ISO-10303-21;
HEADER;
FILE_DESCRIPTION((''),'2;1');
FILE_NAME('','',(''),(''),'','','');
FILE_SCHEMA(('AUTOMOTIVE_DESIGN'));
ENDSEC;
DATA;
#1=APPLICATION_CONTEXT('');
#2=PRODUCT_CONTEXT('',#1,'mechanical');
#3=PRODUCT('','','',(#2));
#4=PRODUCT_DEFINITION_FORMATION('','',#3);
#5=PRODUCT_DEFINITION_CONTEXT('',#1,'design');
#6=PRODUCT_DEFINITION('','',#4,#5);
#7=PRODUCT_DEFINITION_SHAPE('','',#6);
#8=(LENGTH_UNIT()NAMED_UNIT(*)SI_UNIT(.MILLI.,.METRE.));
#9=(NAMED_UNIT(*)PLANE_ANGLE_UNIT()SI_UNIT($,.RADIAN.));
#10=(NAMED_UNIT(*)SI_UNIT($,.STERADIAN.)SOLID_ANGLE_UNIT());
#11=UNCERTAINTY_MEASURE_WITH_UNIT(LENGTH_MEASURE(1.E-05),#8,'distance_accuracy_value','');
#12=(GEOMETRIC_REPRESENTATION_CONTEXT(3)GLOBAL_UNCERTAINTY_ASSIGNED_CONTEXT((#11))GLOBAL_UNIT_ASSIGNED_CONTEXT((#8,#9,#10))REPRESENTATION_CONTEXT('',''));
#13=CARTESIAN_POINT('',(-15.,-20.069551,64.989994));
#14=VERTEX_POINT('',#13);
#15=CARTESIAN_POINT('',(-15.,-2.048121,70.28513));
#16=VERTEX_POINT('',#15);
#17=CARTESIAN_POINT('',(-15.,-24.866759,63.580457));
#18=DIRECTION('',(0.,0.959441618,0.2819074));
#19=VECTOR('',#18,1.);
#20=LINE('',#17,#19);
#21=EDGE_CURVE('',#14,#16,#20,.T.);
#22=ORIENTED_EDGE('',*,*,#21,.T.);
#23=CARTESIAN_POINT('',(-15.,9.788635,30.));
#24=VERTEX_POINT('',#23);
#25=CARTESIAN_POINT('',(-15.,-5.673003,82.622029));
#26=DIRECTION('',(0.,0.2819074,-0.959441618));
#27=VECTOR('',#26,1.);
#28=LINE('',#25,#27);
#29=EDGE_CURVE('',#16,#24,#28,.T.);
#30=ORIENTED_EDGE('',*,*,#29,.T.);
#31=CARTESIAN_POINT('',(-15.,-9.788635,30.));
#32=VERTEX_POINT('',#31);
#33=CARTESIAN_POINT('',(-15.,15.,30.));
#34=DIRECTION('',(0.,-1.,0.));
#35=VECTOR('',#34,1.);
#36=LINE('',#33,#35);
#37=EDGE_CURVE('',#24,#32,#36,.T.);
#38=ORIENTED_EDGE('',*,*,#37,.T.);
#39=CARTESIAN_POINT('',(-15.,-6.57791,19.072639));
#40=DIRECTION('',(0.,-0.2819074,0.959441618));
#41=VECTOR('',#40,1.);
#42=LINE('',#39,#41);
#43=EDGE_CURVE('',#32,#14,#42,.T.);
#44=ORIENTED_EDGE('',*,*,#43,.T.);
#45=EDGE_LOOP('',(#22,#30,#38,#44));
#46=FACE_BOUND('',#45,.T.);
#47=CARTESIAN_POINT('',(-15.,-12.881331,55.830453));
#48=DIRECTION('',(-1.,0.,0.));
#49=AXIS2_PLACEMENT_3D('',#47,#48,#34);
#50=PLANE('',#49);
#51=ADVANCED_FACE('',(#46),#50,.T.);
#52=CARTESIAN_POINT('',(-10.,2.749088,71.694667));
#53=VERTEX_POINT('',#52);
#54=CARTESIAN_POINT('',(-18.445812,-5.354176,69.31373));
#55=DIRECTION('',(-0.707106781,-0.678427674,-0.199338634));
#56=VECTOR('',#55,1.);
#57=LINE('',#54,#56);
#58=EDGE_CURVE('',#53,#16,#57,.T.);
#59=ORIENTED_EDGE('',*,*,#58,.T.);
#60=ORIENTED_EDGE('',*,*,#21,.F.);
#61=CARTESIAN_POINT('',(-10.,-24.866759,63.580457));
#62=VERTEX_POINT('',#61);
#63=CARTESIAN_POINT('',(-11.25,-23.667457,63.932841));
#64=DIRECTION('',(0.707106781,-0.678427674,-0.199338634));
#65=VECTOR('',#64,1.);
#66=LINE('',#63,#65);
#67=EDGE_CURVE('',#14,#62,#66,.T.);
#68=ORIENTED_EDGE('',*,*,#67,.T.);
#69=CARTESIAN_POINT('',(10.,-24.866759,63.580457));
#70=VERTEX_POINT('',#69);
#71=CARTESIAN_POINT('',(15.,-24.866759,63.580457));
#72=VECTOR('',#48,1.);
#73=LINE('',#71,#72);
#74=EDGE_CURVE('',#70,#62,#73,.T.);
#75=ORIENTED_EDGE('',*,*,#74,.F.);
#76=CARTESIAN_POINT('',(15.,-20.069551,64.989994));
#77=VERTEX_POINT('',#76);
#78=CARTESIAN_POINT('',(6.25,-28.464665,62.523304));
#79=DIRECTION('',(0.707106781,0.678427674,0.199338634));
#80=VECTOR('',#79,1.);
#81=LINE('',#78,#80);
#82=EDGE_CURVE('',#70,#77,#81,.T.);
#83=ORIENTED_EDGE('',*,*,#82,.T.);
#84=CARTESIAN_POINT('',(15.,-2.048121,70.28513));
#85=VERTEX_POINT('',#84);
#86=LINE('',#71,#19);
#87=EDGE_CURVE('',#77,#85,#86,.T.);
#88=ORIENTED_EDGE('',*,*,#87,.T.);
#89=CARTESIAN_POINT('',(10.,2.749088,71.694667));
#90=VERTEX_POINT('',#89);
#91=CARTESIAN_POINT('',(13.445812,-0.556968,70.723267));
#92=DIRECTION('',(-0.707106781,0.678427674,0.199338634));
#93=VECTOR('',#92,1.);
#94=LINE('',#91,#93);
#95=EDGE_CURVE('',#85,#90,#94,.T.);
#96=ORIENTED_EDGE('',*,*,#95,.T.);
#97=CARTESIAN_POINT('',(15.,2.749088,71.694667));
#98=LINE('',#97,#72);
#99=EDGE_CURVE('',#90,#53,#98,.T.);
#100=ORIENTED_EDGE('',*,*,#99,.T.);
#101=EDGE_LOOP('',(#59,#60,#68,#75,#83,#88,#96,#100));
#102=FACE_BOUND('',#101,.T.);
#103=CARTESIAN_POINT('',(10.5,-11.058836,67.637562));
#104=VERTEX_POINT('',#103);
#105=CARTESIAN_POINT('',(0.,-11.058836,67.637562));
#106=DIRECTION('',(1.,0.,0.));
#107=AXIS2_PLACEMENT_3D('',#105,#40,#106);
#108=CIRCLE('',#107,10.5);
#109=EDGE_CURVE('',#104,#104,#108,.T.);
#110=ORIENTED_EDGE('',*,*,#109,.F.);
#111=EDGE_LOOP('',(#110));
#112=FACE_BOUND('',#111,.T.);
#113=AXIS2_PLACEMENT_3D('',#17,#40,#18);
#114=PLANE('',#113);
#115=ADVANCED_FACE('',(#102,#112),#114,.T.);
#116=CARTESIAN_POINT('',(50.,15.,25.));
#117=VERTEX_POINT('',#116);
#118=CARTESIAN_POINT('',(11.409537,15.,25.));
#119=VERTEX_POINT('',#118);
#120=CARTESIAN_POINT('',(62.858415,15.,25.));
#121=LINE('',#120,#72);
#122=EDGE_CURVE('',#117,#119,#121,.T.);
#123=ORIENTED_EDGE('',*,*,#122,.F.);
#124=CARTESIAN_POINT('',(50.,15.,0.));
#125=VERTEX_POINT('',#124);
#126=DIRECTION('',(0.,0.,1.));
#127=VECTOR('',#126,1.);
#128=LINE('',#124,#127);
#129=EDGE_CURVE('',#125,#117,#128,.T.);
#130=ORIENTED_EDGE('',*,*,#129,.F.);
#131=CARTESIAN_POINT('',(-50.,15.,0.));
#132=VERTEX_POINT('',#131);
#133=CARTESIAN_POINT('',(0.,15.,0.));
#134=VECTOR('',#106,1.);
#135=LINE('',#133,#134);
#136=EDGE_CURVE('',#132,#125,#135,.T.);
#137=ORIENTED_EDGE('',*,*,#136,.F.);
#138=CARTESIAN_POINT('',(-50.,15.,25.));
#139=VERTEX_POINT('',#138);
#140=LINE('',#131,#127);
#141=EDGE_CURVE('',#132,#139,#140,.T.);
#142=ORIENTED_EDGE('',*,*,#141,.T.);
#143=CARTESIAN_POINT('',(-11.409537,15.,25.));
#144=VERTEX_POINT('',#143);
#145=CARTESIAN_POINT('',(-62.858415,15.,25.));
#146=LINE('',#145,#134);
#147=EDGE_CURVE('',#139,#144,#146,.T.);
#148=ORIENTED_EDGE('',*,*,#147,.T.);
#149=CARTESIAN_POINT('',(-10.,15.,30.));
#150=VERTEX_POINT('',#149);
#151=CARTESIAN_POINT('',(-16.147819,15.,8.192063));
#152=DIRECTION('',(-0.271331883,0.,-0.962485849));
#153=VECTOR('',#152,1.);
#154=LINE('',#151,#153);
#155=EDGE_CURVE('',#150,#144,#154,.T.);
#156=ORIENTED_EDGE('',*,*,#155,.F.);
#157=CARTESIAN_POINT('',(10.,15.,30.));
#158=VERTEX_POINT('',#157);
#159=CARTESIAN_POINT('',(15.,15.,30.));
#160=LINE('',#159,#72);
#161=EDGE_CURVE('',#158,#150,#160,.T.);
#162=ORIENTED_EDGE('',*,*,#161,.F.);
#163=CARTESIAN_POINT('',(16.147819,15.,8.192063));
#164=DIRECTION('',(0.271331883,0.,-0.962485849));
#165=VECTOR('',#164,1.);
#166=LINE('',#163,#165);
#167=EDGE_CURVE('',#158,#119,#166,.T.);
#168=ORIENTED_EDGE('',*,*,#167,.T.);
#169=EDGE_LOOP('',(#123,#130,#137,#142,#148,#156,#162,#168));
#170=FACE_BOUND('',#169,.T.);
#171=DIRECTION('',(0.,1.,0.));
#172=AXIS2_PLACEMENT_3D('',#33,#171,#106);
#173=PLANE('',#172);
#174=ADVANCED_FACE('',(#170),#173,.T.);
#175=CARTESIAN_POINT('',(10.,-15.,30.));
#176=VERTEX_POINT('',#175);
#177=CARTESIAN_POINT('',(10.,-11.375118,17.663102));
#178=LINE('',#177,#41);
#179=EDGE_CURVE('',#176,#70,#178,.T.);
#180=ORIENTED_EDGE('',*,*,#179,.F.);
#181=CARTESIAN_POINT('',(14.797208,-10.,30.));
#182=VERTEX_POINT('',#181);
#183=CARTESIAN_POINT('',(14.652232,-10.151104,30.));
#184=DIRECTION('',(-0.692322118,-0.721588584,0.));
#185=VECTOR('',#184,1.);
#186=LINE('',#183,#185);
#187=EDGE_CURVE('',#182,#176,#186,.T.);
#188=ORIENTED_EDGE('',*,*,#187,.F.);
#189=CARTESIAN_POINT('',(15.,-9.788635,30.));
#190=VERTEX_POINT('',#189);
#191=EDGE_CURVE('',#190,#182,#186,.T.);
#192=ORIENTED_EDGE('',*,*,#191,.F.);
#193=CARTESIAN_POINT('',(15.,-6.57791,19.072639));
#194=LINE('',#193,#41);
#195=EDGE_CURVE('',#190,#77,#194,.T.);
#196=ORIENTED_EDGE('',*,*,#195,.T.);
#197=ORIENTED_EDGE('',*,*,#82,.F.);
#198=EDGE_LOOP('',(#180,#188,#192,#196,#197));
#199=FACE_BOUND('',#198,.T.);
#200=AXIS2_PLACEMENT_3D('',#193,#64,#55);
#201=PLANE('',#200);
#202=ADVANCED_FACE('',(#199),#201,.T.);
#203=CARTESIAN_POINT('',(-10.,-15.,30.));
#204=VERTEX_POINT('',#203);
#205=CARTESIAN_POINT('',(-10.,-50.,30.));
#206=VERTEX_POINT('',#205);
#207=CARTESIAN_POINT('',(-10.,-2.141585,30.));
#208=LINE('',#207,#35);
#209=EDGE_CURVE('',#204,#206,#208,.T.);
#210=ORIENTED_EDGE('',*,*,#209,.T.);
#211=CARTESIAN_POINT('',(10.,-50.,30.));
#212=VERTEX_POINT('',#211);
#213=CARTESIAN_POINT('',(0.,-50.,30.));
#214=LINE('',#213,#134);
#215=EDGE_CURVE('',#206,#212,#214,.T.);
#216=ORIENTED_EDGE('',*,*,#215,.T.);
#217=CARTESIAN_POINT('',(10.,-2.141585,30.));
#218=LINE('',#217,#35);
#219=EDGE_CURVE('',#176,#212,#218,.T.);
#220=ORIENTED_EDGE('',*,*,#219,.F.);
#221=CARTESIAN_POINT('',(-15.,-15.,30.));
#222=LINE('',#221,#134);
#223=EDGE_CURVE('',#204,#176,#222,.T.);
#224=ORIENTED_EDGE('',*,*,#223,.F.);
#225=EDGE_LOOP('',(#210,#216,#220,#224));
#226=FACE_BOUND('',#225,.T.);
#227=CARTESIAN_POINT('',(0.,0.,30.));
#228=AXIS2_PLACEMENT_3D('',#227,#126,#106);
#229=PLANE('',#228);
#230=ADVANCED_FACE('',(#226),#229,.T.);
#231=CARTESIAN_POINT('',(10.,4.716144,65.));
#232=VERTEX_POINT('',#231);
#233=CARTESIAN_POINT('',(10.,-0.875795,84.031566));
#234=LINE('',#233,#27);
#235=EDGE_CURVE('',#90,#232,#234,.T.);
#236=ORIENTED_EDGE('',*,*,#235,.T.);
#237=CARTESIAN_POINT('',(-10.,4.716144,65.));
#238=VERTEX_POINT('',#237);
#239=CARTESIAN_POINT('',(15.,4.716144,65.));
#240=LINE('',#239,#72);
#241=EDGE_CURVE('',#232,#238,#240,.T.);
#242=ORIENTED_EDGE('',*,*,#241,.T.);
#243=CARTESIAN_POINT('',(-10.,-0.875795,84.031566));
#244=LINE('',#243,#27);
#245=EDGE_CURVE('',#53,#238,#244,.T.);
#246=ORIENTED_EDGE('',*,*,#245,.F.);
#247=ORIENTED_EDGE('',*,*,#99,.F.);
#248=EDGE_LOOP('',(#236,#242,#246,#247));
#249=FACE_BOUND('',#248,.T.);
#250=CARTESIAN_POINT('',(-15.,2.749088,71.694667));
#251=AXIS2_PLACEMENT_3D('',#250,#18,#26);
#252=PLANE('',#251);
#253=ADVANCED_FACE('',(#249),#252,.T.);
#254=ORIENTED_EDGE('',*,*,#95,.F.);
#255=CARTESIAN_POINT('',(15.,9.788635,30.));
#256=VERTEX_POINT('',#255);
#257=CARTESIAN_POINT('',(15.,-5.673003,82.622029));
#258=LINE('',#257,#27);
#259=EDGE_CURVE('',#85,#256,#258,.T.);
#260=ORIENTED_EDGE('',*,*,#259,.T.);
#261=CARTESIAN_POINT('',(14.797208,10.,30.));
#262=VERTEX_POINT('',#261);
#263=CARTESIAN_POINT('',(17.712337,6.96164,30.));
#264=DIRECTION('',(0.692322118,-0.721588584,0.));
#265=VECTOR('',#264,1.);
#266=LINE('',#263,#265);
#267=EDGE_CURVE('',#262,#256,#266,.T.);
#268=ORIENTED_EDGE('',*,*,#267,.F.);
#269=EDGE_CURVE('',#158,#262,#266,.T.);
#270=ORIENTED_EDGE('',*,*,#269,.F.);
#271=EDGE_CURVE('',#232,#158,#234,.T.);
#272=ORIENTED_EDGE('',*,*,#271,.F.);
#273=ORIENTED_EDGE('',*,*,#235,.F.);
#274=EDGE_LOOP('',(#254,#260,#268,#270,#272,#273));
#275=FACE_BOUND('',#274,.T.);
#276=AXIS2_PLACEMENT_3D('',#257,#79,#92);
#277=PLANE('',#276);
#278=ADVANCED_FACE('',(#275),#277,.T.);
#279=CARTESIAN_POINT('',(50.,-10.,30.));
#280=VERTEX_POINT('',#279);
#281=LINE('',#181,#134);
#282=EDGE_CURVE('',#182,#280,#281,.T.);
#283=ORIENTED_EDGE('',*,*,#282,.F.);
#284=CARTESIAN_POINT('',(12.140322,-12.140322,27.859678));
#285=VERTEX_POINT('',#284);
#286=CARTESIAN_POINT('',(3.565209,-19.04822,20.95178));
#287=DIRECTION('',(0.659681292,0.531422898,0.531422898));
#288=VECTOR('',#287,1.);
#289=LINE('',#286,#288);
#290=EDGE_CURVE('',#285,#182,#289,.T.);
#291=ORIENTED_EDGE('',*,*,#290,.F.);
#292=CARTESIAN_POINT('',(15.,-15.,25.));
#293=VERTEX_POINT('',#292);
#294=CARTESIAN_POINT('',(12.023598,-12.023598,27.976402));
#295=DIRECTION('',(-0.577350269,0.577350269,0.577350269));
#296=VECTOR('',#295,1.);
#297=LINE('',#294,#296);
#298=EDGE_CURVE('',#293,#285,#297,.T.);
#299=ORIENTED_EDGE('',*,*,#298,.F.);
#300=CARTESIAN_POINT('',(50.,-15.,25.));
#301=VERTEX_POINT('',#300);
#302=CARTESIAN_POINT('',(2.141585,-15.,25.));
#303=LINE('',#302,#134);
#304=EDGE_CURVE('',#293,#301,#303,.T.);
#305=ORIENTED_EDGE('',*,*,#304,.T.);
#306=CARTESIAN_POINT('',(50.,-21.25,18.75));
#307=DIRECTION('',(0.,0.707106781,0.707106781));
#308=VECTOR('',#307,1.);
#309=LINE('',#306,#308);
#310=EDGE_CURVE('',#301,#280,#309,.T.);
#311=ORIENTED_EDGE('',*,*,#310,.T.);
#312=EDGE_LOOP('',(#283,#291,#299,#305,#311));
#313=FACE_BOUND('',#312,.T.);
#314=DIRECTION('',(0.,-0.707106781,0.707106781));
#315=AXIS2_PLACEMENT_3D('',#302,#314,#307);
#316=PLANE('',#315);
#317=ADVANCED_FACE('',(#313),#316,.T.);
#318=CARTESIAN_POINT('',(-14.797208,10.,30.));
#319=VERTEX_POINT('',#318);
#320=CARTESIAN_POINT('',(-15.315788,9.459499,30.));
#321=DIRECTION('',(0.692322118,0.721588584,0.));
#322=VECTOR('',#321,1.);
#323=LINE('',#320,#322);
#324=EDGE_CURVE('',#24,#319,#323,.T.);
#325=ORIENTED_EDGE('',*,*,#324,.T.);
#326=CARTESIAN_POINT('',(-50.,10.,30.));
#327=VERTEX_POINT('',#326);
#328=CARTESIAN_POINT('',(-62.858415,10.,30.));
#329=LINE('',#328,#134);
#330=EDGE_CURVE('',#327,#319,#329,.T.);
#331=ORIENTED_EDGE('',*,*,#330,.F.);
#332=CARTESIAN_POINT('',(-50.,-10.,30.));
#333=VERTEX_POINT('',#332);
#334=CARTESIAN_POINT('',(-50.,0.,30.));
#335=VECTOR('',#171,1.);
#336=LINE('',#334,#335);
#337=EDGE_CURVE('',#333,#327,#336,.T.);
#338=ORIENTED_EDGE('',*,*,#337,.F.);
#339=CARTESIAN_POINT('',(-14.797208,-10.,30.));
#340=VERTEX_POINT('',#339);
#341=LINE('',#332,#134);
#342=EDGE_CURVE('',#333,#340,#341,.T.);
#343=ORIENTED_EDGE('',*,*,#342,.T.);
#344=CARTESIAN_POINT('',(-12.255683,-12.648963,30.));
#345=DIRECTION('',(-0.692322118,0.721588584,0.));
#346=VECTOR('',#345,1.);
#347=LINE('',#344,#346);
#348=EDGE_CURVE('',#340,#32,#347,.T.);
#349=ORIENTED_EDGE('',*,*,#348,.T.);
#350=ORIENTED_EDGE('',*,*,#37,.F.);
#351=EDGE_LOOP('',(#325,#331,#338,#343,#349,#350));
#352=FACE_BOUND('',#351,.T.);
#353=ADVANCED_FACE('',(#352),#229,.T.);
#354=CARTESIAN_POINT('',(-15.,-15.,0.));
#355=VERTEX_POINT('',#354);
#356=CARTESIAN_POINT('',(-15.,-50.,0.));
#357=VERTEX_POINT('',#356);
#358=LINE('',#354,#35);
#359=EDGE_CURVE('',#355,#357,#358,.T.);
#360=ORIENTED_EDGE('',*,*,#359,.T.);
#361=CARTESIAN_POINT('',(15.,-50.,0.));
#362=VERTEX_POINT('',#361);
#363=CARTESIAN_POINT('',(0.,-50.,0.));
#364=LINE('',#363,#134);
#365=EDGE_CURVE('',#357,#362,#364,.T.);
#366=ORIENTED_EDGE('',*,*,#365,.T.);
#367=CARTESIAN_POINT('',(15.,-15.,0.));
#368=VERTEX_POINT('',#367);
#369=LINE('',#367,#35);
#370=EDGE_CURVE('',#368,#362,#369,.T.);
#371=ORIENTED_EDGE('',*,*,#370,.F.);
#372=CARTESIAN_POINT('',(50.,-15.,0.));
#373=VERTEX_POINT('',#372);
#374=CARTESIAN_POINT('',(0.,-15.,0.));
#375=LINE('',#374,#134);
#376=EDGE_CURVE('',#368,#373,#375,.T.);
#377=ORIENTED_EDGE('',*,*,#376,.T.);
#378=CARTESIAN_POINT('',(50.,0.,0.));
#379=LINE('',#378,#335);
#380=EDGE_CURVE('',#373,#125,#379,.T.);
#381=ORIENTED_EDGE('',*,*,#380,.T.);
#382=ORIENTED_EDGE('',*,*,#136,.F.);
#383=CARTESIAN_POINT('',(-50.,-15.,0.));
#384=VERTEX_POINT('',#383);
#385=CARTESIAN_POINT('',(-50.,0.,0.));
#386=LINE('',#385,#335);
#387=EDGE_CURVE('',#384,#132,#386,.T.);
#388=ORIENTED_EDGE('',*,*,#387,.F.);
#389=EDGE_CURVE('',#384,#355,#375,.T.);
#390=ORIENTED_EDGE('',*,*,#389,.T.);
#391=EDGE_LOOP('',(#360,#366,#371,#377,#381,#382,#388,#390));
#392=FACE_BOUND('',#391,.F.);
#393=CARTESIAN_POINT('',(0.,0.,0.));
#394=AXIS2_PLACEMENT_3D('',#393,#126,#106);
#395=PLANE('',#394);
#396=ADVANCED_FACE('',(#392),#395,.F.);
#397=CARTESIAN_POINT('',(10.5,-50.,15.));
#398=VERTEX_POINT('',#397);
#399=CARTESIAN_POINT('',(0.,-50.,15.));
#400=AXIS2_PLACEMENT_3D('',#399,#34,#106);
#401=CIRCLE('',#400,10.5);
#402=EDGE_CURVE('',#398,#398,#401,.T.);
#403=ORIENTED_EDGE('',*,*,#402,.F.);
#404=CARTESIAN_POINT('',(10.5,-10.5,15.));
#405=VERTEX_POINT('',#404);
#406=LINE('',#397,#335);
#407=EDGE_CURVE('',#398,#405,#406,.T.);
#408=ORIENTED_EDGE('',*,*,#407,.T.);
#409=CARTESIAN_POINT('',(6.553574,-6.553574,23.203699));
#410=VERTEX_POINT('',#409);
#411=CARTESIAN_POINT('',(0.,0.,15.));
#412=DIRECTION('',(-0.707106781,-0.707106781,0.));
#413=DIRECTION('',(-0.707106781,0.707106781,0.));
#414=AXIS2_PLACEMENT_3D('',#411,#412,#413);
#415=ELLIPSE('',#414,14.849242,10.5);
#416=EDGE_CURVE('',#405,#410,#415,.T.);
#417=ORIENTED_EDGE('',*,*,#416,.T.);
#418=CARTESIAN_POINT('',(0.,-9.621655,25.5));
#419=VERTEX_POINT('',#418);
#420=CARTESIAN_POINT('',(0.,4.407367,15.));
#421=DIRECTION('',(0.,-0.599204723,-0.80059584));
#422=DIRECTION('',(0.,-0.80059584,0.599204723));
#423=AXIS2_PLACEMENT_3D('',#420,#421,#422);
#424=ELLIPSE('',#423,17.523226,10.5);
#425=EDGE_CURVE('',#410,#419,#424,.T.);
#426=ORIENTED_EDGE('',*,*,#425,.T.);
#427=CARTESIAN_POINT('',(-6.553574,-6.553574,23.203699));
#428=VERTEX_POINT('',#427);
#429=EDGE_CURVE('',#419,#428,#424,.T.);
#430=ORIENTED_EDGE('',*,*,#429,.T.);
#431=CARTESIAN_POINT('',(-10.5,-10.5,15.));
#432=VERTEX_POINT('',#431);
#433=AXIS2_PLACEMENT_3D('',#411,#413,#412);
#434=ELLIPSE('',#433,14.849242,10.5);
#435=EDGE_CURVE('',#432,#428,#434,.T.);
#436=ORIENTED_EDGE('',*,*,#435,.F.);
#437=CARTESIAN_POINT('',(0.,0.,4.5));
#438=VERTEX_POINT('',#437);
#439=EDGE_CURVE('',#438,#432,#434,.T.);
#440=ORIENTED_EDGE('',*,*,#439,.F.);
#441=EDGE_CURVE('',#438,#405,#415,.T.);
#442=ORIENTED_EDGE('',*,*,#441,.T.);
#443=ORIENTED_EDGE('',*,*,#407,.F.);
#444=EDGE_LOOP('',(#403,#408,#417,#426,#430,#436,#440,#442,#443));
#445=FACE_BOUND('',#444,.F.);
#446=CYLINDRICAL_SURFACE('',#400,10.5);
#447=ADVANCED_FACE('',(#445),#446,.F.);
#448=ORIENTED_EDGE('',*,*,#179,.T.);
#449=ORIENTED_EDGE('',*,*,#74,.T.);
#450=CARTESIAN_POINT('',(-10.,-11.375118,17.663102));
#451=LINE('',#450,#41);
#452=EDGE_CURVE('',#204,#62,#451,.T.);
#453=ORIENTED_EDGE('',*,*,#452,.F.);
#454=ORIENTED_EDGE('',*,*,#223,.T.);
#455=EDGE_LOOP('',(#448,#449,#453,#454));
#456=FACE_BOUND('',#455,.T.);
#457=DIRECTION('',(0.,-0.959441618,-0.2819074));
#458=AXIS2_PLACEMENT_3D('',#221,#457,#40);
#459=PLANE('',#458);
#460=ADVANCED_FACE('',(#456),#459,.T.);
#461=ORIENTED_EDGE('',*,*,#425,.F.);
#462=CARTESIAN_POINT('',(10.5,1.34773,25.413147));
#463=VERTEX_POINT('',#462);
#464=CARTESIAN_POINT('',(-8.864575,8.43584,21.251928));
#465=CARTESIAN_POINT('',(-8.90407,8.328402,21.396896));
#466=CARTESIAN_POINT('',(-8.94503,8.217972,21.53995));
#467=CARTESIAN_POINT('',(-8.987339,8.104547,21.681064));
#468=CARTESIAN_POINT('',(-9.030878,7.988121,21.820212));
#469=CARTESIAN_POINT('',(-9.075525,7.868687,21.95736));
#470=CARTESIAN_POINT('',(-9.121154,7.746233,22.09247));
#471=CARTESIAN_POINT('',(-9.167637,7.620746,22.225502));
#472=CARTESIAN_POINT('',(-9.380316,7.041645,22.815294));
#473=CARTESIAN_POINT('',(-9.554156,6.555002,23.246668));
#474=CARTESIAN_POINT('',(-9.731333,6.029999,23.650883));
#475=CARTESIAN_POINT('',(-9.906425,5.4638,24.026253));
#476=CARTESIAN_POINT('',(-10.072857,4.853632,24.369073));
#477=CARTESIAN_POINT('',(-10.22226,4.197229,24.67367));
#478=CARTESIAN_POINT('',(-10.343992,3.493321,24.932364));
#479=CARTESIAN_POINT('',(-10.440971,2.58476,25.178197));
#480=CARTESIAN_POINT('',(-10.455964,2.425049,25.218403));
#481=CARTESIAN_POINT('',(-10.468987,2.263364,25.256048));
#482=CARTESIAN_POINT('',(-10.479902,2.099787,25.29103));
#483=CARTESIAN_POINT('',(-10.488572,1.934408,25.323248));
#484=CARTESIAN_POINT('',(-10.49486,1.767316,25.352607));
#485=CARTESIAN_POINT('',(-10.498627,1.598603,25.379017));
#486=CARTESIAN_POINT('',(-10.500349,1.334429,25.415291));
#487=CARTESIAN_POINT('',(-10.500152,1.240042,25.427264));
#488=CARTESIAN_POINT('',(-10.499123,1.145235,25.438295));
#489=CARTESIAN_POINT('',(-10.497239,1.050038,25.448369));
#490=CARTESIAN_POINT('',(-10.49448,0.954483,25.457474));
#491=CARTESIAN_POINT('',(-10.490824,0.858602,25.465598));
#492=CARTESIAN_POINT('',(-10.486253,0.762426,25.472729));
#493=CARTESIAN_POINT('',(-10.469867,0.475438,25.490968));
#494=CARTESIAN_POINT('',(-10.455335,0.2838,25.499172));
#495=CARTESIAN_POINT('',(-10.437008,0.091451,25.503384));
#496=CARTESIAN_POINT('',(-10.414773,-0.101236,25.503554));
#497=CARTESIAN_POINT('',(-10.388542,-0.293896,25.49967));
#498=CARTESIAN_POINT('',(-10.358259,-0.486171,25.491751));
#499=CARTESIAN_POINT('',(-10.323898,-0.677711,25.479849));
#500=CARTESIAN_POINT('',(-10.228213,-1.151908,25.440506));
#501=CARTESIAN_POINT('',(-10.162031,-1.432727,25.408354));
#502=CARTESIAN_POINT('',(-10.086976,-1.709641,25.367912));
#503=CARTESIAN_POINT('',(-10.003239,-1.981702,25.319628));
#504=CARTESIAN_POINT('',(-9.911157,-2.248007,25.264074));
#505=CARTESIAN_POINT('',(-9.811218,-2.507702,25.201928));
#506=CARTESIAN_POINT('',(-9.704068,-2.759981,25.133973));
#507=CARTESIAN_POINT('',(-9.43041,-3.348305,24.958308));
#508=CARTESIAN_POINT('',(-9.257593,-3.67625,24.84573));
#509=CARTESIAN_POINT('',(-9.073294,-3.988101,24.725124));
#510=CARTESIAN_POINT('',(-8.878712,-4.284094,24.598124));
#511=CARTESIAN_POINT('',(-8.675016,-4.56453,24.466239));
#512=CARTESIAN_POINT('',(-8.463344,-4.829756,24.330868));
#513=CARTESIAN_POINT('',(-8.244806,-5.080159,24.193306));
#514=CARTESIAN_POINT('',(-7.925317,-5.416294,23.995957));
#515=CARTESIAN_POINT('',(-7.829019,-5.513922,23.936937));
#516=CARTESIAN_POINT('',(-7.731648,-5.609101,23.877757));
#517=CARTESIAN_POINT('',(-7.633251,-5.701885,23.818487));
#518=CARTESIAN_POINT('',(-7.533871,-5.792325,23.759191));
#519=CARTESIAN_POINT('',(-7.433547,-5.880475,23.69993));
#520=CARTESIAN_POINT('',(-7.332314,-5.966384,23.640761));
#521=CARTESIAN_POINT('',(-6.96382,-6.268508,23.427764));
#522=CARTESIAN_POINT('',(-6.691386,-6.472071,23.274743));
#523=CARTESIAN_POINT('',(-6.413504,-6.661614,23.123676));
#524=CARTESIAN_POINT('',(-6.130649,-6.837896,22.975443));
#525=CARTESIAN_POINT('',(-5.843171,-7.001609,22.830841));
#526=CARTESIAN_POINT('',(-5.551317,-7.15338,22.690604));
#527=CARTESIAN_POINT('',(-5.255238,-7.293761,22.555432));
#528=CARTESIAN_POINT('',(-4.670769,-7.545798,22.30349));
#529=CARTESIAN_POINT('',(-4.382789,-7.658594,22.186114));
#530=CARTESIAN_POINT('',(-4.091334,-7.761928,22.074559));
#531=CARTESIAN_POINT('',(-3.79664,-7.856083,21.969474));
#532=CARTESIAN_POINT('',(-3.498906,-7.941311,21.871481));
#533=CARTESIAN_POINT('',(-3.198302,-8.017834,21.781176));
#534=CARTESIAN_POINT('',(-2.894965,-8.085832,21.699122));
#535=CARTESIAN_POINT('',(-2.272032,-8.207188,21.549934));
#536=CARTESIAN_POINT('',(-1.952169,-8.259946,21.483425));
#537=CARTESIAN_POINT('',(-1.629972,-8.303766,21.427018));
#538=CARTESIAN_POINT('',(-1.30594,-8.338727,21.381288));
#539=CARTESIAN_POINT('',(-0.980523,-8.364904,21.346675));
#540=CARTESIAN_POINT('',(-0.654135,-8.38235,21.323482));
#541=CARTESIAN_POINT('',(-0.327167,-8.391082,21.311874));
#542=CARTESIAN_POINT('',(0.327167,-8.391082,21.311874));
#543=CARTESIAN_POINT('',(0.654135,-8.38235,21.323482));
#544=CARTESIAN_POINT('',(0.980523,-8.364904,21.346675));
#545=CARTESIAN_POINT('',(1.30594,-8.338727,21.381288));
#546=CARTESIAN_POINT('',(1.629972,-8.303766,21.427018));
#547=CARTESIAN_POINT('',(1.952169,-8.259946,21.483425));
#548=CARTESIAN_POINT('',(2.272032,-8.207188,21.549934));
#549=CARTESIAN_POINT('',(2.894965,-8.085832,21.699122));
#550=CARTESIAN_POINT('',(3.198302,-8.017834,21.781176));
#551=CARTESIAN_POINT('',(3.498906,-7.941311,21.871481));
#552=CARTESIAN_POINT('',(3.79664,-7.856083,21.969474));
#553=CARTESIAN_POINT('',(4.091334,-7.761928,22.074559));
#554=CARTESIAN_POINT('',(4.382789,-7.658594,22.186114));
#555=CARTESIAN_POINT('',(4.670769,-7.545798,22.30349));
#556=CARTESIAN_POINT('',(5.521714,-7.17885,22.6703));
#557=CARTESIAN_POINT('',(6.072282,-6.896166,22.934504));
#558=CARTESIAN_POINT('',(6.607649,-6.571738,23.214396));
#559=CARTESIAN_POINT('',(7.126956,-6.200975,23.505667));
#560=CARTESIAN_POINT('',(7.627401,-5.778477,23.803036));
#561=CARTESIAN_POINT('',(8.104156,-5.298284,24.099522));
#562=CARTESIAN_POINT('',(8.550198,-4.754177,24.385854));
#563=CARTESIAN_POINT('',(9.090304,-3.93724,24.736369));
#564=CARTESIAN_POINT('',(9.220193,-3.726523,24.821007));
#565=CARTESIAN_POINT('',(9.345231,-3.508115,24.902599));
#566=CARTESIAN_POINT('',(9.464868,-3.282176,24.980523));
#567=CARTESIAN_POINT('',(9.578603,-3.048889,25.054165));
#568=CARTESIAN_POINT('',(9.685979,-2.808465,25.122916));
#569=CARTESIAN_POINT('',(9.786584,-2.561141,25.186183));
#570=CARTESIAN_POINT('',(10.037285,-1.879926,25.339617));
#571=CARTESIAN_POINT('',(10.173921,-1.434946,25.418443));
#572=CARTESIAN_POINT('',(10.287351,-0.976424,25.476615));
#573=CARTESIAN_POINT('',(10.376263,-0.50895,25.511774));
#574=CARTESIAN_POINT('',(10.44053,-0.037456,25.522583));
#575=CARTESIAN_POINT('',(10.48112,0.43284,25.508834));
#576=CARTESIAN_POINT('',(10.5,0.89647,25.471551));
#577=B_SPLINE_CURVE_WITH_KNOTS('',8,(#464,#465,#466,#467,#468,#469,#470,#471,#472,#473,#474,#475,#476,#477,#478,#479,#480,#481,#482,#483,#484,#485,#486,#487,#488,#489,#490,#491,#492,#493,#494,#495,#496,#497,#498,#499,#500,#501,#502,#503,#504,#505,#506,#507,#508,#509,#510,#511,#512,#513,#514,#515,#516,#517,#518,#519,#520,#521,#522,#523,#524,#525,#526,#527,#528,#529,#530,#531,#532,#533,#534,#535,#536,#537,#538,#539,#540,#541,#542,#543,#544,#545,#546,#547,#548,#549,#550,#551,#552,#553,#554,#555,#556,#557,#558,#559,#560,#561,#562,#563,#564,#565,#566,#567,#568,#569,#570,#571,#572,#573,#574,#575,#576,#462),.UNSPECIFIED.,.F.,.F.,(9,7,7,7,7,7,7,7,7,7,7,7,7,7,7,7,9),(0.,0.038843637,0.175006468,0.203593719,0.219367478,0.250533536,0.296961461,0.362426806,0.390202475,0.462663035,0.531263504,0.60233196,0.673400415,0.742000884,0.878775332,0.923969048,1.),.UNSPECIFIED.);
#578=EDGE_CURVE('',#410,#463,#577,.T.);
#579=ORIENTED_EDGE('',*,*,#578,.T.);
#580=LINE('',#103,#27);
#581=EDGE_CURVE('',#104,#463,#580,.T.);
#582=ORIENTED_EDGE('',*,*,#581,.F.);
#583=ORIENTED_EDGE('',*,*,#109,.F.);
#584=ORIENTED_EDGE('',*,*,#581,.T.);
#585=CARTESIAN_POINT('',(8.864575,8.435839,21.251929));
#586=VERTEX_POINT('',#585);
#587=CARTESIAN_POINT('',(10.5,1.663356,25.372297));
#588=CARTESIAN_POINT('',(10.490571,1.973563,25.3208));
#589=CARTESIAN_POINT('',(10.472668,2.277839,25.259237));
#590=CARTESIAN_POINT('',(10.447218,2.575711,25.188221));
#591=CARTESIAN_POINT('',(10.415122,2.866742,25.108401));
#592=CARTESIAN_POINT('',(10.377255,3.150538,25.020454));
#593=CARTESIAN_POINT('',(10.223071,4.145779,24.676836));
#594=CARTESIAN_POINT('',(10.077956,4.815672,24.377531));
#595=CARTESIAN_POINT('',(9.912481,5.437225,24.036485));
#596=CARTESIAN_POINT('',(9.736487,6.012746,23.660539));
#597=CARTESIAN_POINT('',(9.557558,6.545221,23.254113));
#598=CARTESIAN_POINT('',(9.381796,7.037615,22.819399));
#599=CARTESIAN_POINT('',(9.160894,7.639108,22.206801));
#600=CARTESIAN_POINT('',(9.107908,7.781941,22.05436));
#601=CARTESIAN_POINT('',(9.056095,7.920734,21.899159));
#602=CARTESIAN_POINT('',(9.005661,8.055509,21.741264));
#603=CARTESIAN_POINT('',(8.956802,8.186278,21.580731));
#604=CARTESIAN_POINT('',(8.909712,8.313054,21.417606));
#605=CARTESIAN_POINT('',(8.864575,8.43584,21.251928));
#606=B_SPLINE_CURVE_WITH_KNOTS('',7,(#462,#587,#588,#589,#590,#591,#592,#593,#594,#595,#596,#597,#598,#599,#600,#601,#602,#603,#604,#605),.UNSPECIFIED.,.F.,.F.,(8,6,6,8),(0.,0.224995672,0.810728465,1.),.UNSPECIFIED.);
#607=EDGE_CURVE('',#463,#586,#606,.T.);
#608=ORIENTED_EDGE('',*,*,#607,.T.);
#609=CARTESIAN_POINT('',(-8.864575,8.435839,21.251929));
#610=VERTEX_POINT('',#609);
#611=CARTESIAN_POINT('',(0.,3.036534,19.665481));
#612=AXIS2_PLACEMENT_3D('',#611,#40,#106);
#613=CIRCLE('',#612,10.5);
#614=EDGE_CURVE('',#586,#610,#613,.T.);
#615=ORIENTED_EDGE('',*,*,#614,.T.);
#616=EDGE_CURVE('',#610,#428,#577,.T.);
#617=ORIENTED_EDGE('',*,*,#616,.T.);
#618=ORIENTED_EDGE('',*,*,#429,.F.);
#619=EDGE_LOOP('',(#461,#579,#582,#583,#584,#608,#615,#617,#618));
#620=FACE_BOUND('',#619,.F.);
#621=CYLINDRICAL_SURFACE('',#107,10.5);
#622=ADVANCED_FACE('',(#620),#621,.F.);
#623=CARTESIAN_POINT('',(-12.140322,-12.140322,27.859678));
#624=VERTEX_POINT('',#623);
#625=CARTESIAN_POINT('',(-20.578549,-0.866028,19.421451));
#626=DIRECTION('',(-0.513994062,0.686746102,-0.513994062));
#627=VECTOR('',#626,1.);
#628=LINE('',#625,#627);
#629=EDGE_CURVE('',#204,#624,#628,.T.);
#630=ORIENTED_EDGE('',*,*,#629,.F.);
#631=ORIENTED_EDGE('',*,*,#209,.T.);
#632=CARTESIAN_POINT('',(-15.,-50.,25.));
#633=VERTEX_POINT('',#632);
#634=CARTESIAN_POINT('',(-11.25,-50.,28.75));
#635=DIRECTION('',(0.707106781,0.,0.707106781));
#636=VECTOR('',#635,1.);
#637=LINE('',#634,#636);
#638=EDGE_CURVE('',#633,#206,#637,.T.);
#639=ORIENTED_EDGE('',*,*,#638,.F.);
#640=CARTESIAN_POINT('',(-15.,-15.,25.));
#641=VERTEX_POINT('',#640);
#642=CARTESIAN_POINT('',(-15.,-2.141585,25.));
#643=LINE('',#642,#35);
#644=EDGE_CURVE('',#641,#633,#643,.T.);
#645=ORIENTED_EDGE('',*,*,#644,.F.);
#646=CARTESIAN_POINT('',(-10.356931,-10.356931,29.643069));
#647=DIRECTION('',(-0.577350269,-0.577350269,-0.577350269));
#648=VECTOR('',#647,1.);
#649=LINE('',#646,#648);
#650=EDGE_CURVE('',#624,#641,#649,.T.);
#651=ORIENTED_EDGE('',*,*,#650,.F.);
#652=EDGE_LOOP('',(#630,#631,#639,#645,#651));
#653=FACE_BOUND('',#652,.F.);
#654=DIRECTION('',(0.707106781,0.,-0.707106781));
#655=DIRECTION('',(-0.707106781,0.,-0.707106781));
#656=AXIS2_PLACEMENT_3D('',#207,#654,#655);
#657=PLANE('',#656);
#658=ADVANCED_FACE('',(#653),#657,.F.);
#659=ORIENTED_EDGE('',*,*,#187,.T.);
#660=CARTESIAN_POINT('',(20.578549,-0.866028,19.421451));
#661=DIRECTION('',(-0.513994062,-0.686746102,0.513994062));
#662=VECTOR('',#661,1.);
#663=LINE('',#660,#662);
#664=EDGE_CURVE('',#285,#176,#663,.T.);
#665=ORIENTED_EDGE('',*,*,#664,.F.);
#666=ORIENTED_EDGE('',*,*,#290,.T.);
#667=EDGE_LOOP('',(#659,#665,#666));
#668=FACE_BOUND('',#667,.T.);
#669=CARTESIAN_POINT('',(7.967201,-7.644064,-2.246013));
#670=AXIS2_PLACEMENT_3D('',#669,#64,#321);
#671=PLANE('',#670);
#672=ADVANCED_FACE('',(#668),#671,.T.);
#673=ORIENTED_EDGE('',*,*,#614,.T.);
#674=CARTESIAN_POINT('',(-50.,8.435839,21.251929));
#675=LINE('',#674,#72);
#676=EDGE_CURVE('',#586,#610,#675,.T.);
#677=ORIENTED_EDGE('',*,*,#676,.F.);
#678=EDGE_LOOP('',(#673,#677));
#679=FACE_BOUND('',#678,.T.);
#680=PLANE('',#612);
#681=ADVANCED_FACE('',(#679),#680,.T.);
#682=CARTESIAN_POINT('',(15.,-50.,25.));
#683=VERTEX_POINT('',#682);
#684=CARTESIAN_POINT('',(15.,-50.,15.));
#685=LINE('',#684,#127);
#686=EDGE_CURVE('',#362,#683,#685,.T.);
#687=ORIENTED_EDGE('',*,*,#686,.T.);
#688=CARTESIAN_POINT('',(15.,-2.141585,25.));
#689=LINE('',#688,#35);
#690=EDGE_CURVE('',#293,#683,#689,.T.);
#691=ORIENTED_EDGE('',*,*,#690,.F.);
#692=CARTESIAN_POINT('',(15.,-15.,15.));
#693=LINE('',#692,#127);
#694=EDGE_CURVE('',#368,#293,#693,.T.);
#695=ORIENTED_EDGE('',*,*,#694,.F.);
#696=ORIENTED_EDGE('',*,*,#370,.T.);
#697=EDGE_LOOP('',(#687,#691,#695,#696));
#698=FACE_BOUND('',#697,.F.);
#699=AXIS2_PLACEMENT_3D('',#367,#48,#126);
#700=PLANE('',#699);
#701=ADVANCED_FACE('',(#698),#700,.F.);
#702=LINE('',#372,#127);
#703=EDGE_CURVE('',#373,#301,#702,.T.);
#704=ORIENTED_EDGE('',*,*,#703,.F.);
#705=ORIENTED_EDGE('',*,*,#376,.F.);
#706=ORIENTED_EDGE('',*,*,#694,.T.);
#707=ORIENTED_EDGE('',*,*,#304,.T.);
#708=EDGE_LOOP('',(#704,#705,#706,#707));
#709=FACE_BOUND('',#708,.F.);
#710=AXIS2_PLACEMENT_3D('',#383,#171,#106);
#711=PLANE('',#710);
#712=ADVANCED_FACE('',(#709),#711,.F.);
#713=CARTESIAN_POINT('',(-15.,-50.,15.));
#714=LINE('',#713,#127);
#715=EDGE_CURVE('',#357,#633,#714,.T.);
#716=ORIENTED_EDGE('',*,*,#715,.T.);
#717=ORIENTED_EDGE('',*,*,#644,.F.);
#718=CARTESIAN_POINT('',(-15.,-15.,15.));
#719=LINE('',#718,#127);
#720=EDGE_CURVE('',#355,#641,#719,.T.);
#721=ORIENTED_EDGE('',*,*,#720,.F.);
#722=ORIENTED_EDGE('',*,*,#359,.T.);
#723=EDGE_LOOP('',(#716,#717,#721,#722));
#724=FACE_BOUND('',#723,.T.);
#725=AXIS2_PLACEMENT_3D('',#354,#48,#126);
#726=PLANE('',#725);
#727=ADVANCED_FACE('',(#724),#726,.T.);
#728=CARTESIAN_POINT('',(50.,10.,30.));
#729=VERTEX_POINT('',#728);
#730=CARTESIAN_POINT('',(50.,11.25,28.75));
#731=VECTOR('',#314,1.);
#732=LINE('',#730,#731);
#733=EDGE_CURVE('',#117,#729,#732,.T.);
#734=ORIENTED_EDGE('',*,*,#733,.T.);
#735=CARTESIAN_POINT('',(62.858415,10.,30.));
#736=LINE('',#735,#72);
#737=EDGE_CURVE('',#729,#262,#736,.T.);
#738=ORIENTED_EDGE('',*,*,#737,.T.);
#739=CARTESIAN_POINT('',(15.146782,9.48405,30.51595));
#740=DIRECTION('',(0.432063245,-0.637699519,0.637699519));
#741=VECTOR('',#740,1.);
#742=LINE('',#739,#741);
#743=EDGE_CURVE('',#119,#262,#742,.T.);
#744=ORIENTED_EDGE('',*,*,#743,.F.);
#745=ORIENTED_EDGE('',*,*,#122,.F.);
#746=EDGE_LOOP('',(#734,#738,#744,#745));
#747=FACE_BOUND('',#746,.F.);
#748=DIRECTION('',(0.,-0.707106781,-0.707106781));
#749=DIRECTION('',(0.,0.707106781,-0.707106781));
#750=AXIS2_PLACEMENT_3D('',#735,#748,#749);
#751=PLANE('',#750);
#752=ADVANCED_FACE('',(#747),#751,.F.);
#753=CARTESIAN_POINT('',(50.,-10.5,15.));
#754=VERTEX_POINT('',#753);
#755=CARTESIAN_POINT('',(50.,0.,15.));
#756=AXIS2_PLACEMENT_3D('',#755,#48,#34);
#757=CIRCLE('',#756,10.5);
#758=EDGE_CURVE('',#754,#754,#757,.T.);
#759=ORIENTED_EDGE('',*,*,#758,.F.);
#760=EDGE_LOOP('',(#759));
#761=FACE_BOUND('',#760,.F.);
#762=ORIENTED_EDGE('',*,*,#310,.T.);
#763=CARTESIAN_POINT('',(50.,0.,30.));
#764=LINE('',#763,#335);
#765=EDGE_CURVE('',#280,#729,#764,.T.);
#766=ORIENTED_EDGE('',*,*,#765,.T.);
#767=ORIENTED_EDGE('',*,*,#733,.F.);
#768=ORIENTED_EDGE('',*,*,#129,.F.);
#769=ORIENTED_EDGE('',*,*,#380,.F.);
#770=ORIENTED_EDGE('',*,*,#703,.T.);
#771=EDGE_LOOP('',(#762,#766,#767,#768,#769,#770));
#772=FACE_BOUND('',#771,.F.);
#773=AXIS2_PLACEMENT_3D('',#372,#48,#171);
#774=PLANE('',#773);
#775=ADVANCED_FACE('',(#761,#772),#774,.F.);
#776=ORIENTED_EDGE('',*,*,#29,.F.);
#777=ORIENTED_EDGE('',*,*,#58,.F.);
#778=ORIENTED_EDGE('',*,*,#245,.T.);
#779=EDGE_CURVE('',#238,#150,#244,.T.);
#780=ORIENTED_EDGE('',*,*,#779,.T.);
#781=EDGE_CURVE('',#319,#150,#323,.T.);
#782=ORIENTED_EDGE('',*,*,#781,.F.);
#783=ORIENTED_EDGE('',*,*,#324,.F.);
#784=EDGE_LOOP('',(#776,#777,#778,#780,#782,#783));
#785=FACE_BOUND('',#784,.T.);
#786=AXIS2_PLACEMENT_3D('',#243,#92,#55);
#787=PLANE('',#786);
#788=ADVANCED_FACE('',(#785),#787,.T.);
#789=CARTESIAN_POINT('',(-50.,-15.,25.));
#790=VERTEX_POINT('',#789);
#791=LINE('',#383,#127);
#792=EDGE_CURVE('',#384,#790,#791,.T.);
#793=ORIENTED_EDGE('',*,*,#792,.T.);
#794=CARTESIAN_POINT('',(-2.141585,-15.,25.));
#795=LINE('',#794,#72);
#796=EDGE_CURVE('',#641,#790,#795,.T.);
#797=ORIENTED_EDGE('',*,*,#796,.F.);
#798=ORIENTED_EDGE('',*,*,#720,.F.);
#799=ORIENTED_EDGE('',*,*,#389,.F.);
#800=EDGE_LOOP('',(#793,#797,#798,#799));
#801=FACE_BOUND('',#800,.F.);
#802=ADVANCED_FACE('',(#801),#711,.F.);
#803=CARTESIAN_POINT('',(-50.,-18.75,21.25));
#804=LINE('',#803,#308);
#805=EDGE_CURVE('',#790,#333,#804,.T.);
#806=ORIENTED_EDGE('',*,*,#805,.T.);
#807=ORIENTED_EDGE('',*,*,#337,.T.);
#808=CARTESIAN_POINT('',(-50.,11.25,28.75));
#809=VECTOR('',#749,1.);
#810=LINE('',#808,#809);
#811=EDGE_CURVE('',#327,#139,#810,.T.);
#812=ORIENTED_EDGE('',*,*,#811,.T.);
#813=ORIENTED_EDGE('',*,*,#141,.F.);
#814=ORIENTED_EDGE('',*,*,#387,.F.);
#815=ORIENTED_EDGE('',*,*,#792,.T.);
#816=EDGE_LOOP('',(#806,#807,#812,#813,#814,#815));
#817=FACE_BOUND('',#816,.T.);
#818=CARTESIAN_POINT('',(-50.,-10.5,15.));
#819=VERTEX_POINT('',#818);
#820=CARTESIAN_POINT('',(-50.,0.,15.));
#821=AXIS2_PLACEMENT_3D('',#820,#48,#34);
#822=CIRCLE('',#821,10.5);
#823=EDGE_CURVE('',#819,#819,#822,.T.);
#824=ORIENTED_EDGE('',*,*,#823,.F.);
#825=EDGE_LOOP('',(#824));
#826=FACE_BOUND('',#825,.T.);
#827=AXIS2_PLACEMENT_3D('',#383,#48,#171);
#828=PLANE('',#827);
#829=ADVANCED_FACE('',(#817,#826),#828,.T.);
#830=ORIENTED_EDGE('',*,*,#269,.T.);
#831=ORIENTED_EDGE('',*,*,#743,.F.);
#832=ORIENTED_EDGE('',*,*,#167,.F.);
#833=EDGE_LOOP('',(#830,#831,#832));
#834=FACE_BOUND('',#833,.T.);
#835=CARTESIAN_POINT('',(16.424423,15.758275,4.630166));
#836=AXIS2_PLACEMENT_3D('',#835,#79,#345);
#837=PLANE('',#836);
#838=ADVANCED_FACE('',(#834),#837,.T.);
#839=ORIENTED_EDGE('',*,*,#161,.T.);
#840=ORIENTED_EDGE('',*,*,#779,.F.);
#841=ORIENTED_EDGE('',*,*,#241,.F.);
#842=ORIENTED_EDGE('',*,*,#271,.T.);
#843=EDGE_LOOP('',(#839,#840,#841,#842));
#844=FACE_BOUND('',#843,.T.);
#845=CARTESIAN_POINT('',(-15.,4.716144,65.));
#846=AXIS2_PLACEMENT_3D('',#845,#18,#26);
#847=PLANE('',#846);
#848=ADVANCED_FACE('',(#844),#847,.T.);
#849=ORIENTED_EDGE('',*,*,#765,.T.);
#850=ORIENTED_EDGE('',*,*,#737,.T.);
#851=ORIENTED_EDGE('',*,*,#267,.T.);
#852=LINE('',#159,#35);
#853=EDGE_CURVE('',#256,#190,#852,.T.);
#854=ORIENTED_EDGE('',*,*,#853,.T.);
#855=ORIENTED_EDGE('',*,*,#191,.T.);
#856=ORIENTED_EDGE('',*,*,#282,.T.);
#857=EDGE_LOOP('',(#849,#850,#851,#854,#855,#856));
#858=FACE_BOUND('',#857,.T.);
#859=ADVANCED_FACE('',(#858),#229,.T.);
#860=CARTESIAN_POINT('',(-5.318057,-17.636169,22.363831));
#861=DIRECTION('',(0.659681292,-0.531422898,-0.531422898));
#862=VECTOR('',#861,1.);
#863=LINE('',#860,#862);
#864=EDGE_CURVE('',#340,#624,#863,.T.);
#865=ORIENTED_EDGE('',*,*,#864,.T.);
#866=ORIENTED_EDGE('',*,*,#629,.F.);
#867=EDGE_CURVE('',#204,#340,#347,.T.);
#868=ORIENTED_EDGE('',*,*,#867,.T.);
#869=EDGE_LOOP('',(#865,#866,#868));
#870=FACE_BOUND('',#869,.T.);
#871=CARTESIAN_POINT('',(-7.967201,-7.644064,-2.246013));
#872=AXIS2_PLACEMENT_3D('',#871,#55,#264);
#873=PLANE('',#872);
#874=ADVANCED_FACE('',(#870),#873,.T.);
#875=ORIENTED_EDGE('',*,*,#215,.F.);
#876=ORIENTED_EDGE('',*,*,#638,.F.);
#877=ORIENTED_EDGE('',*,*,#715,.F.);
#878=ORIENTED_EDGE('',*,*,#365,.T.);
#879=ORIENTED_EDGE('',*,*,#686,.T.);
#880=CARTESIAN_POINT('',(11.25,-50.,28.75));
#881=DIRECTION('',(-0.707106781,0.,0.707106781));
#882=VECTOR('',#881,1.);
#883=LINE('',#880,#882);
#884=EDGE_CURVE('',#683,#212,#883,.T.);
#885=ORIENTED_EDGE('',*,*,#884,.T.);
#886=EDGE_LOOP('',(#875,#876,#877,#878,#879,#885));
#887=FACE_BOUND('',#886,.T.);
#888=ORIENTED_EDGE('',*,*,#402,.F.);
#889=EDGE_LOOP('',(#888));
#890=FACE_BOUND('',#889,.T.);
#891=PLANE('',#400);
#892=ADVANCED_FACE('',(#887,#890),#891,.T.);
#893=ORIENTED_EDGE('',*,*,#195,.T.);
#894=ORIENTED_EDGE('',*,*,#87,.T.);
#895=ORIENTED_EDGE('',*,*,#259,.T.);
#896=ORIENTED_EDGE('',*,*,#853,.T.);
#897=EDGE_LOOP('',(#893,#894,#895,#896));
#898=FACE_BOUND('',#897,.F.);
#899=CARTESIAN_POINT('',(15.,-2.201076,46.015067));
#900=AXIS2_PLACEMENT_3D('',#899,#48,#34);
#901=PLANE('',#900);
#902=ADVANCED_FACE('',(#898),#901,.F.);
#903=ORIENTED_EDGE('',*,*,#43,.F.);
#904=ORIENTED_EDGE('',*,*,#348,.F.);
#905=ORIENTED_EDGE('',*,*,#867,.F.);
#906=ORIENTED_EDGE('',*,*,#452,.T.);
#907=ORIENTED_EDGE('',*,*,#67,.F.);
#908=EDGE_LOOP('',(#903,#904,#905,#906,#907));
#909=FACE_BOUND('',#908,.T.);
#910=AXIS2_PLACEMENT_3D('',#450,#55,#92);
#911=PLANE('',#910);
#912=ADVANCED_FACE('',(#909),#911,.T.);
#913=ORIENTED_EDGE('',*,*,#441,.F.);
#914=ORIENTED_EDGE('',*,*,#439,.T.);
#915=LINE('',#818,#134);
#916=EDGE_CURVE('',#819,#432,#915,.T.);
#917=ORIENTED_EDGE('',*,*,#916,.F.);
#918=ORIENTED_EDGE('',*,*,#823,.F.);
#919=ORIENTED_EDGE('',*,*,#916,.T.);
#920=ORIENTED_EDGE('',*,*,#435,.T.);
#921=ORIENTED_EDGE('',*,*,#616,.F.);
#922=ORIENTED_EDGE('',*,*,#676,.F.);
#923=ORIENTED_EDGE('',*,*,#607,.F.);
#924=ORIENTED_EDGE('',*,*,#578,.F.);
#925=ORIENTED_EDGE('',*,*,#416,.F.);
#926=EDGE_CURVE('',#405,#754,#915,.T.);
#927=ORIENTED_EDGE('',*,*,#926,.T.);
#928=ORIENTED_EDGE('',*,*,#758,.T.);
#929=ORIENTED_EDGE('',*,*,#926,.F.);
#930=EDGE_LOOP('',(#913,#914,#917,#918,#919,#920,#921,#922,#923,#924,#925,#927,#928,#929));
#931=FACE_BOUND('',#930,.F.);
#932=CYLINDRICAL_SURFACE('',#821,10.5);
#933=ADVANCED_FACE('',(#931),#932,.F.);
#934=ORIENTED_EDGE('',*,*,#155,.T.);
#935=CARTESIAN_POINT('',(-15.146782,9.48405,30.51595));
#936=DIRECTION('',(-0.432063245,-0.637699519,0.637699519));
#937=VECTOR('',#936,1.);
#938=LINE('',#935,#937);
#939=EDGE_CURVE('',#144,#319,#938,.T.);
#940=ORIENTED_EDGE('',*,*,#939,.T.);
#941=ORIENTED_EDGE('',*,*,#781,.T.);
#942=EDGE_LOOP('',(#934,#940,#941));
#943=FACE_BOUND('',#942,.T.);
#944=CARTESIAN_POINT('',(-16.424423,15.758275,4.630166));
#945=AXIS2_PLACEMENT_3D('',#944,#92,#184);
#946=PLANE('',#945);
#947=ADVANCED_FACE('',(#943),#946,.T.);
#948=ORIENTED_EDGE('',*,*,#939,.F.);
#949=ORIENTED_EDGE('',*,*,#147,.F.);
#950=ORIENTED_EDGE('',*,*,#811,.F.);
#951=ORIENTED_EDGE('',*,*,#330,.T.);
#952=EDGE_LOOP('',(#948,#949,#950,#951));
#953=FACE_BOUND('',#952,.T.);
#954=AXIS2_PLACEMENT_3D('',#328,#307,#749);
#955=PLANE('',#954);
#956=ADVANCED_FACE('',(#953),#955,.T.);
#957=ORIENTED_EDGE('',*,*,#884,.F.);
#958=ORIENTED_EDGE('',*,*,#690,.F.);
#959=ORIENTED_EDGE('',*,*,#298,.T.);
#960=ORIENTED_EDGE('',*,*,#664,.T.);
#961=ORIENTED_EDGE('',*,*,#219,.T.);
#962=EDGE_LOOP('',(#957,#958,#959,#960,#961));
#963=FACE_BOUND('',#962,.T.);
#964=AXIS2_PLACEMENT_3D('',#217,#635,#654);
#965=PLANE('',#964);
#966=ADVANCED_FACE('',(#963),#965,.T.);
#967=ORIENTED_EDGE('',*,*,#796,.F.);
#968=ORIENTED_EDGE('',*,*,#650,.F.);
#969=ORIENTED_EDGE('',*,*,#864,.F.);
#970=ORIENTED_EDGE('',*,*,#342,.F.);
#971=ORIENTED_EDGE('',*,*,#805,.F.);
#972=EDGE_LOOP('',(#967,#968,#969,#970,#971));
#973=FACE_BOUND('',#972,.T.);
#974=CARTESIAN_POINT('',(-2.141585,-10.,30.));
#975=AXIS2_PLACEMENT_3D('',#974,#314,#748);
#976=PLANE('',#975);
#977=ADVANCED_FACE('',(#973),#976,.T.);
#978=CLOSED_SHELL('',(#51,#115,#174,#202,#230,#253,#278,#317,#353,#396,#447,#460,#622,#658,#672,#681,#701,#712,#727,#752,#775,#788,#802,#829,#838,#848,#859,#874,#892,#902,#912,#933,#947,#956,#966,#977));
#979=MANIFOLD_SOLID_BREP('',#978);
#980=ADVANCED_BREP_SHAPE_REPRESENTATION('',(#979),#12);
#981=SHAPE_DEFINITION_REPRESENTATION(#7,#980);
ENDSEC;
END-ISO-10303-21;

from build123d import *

# Parameters (mm, degrees)
F0_W          = 100
F0_H          = 30
F1_DEPTH      = 30
F3_R          = 10.5
F4_DEPTH      = 100
F5_W          = 30
F5_H          = 30
F6_DEPTH      = 35
F2_W          = 30
F2_H          = 30
F7_DEPTH      = 35
F9_DEPTH      = 5
F10_DEPTH     = 35
F11_DEPTH     = 30
F12_DEPTH     = 5
F13_R         = 10.5
F14_DEPTH     = 50
F15_R         = 10.5
F16_DEPTH     = 50
F17_T4_DEPTH  = 78.1749423251
F17_T9_DEPTH  = 78.1749423251
F17_T14_DEPTH = 60.7168298797
F17_T19_DEPTH = 60.7168298797
F18_T4_DEPTH  = 52.8584149398
F18_T9_DEPTH  = 60.7168298797
F18_T15_DEPTH = 60.7168298797
F18_T21_DEPTH = 60.7168298797
F18_T27_DEPTH = 60.7168298797
F18_T33_DEPTH = 52.8584149398


# Not quite as in the source:
# - a fillet or chamfer that OpenCascade refuses, or shapes differently, is made with other operations: its cross-section is extruded or revolved along the edge and cut away or added


with BuildPart() as f1:
    # F0 (on Top) → F1 (new body)
    with BuildSketch(Plane.XY):
        Rectangle(F0_W, F0_H)
    extrude(amount=F1_DEPTH)

    # F3 (on face) → F4 (cut)
    with BuildSketch(Plane(origin=(-50, 0, 0), x_dir=(0, -1, 0), z_dir=(-1, 0, 0))):
        with Locations((0, 15)):
            Circle(F3_R)
    extrude(amount=-F4_DEPTH, mode=Mode.SUBTRACT)

    # F5 (on face) → F6 (join)
    with BuildSketch(Plane.XZ.offset(15)):
        with Locations((0, 15)):
            Rectangle(F5_W, F5_H)
    extrude(amount=F6_DEPTH)

    # F2 (on face) → F7 (join)
    with BuildSketch(Plane.XY.offset(30)):
        Rectangle(F2_W, F2_H)
    extrude(amount=F7_DEPTH)

    # F8 (on face) → F9 (join)
    with BuildSketch(Plane(origin=(-15, 0, 0), x_dir=(0, -1, 0), z_dir=(-1, 0, 0))):
        Polygon((15, 65), (15, 30), (24.8667589854, 63.5804566247), (-2.7490875563, 71.6946673709), (-4.7161444721, 65), align=None)
        Polygon((-15, 30), (15, 30), (15, 65), (-4.7161444721, 65), align=None)
    extrude(amount=F9_DEPTH)

    # F10 (cut, through all): a face of the model
    f10_faces = [f1.faces().sort_by_distance(p)[0] for p in [
        (0, 0, 65),
    ]]
    extrude(f10_faces, amount=-F10_DEPTH, mode=Mode.SUBTRACT)

    # F8 (on face) → F11 (join)
    with BuildSketch(Plane(origin=(-15, 0, 0), x_dir=(0, -1, 0), z_dir=(-1, 0, 0))):
        Polygon((-15, 30), (15, 30), (15, 65), (-4.7161444721, 65), align=None)
        Polygon((15, 65), (15, 30), (24.8667589854, 63.5804566247), (-2.7490875563, 71.6946673709), (-4.7161444721, 65), align=None)
    extrude(amount=-F11_DEPTH)

    # F12 (cut): a face of the model
    f12_faces = [f1.faces().sort_by_distance(p)[0] for p in [
        (-20, -5.0118640534, 48.8916696379),
    ]]
    extrude(f12_faces, amount=-F12_DEPTH, mode=Mode.SUBTRACT)

    # F13 (on face) → F14 (cut)
    with BuildSketch(Plane.XZ.offset(50)):
        with Locations((0, 15)):
            Circle(F13_R)
    extrude(amount=-F14_DEPTH, mode=Mode.SUBTRACT)

    # F15 (on face) → F16 (cut)
    with BuildSketch(Plane(origin=(0, -19.1730464608, 65.2534085396), x_dir=(1, 0, 0), z_dir=(0, -0.2819073996, 0.9594416178))):
        with Locations((0, 8.4572219875)):
            Circle(F15_R)
    extrude(amount=-F16_DEPTH, mode=Mode.SUBTRACT)

    # F17: chamfer of 5 on 4 edges, made by hand


with BuildPart() as f17_tool2:
    # F17_s3 → F17_t4 (new body)
    with BuildSketch(Plane(origin=(0, -22.7979287792, 77.5903069724), x_dir=(1, 0, 0), z_dir=(0, 0.2819073996, -0.9594416178))):
        Polygon((-10, -22.8488462553), (-15, -17.8488462553), (-15, -22.8488462553), align=None)
    extrude(amount=F17_T4_DEPTH)

    split(bisect_by=Plane.XY.offset(30), keep=Keep.TOP)


with BuildPart() as f1_1:
    add(f1.part)

    # F17_t1: cut F17_tool2
    add(f17_tool2.part, mode=Mode.SUBTRACT)


with BuildPart() as f17_tool7:
    # F17_s8 → F17_t9 (new body)
    with BuildSketch(Plane(origin=(0, -22.7979287792, 77.5903069724), x_dir=(1, 0, 0), z_dir=(0, 0.2819073996, -0.9594416178))):
        Polygon((15, -17.8488462553), (10, -22.8488462553), (15, -22.8488462553), align=None)
    extrude(amount=F17_T9_DEPTH)

    split(bisect_by=Plane.XY.offset(30), keep=Keep.TOP)


with BuildPart() as f1_2:
    add(f1_1.part)

    # F17_t6: cut F17_tool7
    add(f17_tool7.part, mode=Mode.SUBTRACT)


with BuildPart() as f17_tool12:
    # F17_s13 → F17_t14 (new body)
    with BuildSketch(Plane(origin=(0, -5.6814051569, 19.3360534821), x_dir=(1, 0, 0), z_dir=(0, -0.2819073996, 0.9594416178))):
        Polygon((15, -0.9344022802), (10, -5.9344022802), (15, -5.9344022802), align=None)
    extrude(amount=F17_T14_DEPTH)

    split(bisect_by=Plane.XY.offset(30), keep=Keep.TOP)


with BuildPart() as f1_3:
    add(f1_2.part)

    # F17_t11: cut F17_tool12
    add(f17_tool12.part, mode=Mode.SUBTRACT)


with BuildPart() as f17_tool17:
    # F17_s18 → F17_t19 (new body)
    with BuildSketch(Plane(origin=(0, -5.6814051569, 19.3360534821), x_dir=(1, 0, 0), z_dir=(0, -0.2819073996, 0.9594416178))):
        Polygon((-10, -5.9344022802), (-15, -0.9344022802), (-15, -5.9344022802), align=None)
    extrude(amount=F17_T19_DEPTH)

    split(bisect_by=Plane.XY.offset(30), keep=Keep.TOP)


with BuildPart() as f1_4:
    add(f1_3.part)

    # F17_t16: cut F17_tool17
    add(f17_tool17.part, mode=Mode.SUBTRACT)

    # F18: chamfer of 5 on 6 edges, made by hand


with BuildPart() as f18_tool2:
    # F18_s3 → F18_t4 (new body)
    with BuildSketch(Plane.YZ.offset(62.8584149398)):
        Polygon((10, 30), (15, 25), (15, 30), align=None)
    extrude(amount=-F18_T4_DEPTH)

    split(bisect_by=Plane(origin=(16.4244231276, 15.7582750978, 4.6301664136), x_dir=(-0.6923221184, 0.7215885839, 0), z_dir=(0.7071067812, 0.6784276741, 0.1993386339)), keep=Keep.TOP)


with BuildPart() as f1_5:
    add(f1_4.part)

    # F18_t1: cut F18_tool2
    add(f18_tool2.part, mode=Mode.SUBTRACT)


with BuildPart() as f18_tool7:
    # F18_s8 → F18_t9 (new body)
    with BuildSketch(Plane.YZ.offset(-2.1415850602)):
        Polygon((-10, 30), (-15, 25), (-15, 30), align=None)
    extrude(amount=-F18_T9_DEPTH)

    split(bisect_by=Plane(origin=(-7.9672011401, -7.6440643516, -2.2460129554), x_dir=(0.6923221184, -0.7215885839, 0), z_dir=(-0.7071067812, -0.6784276741, -0.1993386339)), keep=Keep.TOP)

    split(bisect_by=Plane(origin=(-20, 0, 20), x_dir=(0, 1, 0), z_dir=(-0.7071067812, 0, 0.7071067812)), keep=Keep.TOP)


with BuildPart() as f1_6:
    add(f1_5.part)

    # F18_t6: cut F18_tool7
    add(f18_tool7.part, mode=Mode.SUBTRACT)


with BuildPart() as f18_tool13:
    # F18_s14 → F18_t15 (new body)
    with BuildSketch(Plane.YZ.offset(2.1415850602)):
        Polygon((-15, 25), (-10, 30), (-15, 30), align=None)
    extrude(amount=F18_T15_DEPTH)

    split(bisect_by=Plane(origin=(7.9672011401, -7.6440643516, -2.2460129554), x_dir=(0.6923221184, 0.7215885839, 0), z_dir=(0.7071067812, -0.6784276741, -0.1993386339)), keep=Keep.TOP)

    split(bisect_by=Plane(origin=(20, 0, 20), x_dir=(0, 1, 0), z_dir=(0.7071067812, 0, 0.7071067812)), keep=Keep.TOP)


with BuildPart() as f1_7:
    add(f1_6.part)

    # F18_t12: cut F18_tool13
    add(f18_tool13.part, mode=Mode.SUBTRACT)


with BuildPart() as f18_tool19:
    # F18_s20 → F18_t21 (new body)
    with BuildSketch(Plane.XZ.offset(2.1415850602)):
        Polygon((-10, 30), (-15, 25), (-15, 30), align=None)
    extrude(amount=F18_T21_DEPTH)

    split(bisect_by=Plane(origin=(-7.9672011401, -7.6440643516, -2.2460129554), x_dir=(0.6923221184, -0.7215885839, 0), z_dir=(-0.7071067812, -0.6784276741, -0.1993386339)), keep=Keep.TOP)

    split(bisect_by=Plane(origin=(0, -20, 20), x_dir=(1, 0, 0), z_dir=(0, -0.7071067812, 0.7071067812)), keep=Keep.TOP)


with BuildPart() as f1_8:
    add(f1_7.part)

    # F18_t18: cut F18_tool19
    add(f18_tool19.part, mode=Mode.SUBTRACT)


with BuildPart() as f18_tool25:
    # F18_s26 → F18_t27 (new body)
    with BuildSketch(Plane.XZ.offset(2.1415850602)):
        Polygon((10, 30), (15, 25), (15, 30), align=None)
    extrude(amount=F18_T27_DEPTH)

    split(bisect_by=Plane(origin=(7.9672011401, -7.6440643516, -2.2460129554), x_dir=(0.6923221184, 0.7215885839, 0), z_dir=(0.7071067812, -0.6784276741, -0.1993386339)), keep=Keep.TOP)

    split(bisect_by=Plane(origin=(0, -20, 20), x_dir=(1, 0, 0), z_dir=(0, -0.7071067812, 0.7071067812)), keep=Keep.TOP)


with BuildPart() as f1_9:
    add(f1_8.part)

    # F18_t24: cut F18_tool25
    add(f18_tool25.part, mode=Mode.SUBTRACT)


with BuildPart() as f18_tool31:
    # F18_s32 → F18_t33 (new body)
    with BuildSketch(Plane.YZ.offset(-62.8584149398)):
        Polygon((10, 30), (15, 25), (15, 30), align=None)
    extrude(amount=F18_T33_DEPTH)

    split(bisect_by=Plane(origin=(-16.4244231276, 15.7582750978, 4.6301664136), x_dir=(-0.6923221184, -0.7215885839, 0), z_dir=(-0.7071067812, 0.6784276741, 0.1993386339)), keep=Keep.TOP)


with BuildPart() as f1_10:
    add(f1_9.part)

    # F18_t30: cut F18_tool31
    add(f18_tool31.part, mode=Mode.SUBTRACT)


solid = f1_10.part
